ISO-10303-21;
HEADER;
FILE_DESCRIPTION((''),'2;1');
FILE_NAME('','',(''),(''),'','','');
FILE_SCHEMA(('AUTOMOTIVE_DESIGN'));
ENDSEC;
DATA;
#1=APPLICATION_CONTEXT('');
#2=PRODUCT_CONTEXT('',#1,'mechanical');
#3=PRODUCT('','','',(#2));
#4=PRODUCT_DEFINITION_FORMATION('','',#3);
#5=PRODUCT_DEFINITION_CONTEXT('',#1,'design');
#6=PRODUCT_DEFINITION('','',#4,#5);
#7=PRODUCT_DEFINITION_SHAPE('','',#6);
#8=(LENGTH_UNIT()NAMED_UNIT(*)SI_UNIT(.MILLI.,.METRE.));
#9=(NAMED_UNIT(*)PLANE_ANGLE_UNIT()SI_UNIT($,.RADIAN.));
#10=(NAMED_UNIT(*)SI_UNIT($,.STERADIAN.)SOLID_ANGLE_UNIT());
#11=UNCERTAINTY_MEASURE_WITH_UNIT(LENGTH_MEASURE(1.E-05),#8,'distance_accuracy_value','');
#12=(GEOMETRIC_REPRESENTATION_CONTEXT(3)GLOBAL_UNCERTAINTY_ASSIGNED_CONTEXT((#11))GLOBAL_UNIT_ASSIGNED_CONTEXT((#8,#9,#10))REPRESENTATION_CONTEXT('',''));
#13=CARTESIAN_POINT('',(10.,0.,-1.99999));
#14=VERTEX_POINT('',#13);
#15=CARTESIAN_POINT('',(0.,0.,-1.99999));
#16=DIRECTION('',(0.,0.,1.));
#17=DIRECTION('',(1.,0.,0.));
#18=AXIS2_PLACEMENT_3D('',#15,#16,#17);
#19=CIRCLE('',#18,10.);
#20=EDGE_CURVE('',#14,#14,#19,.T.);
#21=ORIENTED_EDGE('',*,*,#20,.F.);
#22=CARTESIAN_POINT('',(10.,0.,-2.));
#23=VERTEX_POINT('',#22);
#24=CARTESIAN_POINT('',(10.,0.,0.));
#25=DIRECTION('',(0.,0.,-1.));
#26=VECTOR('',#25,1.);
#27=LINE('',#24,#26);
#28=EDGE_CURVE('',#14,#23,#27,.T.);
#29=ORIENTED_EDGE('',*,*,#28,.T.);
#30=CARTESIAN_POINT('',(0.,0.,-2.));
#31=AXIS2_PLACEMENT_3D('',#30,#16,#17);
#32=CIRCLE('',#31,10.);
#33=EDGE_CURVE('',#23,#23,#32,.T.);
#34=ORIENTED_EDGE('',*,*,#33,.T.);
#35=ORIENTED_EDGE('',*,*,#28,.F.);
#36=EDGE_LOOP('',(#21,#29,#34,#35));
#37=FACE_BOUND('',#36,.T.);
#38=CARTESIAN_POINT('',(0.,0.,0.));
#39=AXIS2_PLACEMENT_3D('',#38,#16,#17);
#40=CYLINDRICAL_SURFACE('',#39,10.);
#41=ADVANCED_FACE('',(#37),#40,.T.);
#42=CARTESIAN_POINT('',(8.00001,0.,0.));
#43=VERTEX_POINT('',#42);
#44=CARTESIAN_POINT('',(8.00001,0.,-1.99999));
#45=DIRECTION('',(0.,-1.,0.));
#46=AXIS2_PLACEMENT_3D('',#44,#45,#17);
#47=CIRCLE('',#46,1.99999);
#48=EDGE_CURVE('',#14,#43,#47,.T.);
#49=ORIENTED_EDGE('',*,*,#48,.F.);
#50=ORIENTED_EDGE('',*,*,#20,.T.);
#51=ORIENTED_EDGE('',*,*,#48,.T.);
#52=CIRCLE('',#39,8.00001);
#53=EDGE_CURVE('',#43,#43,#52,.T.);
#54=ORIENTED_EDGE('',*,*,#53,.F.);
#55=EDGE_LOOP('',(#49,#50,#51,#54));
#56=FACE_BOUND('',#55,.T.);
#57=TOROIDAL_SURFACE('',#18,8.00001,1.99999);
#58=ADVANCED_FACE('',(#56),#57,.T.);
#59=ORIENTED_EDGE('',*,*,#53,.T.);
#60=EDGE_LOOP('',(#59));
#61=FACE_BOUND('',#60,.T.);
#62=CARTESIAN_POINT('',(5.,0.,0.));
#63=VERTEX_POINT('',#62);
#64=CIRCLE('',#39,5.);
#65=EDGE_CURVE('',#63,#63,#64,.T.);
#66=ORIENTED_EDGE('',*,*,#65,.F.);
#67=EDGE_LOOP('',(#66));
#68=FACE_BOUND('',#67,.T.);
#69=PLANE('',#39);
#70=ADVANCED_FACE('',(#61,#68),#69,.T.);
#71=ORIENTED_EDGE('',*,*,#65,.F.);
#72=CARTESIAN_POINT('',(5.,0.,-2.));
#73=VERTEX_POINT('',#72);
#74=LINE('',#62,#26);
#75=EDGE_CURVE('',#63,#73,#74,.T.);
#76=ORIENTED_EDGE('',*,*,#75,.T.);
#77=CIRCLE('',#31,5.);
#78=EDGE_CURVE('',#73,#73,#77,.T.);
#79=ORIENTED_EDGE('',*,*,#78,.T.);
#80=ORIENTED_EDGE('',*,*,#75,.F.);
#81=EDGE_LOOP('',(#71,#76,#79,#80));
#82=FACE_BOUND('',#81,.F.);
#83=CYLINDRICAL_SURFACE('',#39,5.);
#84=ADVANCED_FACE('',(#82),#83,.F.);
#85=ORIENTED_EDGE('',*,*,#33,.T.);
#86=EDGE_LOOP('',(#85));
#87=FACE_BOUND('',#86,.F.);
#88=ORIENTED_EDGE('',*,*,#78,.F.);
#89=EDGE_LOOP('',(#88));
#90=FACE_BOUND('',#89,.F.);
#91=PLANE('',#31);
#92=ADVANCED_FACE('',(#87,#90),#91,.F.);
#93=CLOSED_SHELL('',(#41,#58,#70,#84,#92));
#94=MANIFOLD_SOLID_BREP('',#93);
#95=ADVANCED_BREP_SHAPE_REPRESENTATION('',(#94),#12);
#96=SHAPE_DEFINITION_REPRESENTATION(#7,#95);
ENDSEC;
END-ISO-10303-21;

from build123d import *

# Parameters (mm, degrees)
F0_R     = 10
F1_DEPTH = 2
F2_R     = 1.99999
F3_R     = 5
F4_DEPTH = 25


# Not quite as in the source:
# - a fillet or chamfer is up to 0.001 mm smaller than in the source, because OpenCascade refuses the exact size


with BuildPart() as f1:
    # F0 (on Top) → F1 (new body)
    with BuildSketch(Plane.XY):
        Circle(F0_R)
    extrude(amount=-F1_DEPTH)

    # F2 (radius 2 in the source; OpenCascade refuses exactly that, so slightly less here)
    f2_edges = [f1.edges().sort_by_distance(p)[0] for p in [
        (-10, 0, 0),
    ]]
    fillet(f2_edges, radius=F2_R)

    # F3 (on face) → F4 (cut)
    with BuildSketch(Plane.XY):
        Circle(F3_R)
    extrude(amount=-F4_DEPTH, mode=Mode.SUBTRACT)


solid = f1.part
